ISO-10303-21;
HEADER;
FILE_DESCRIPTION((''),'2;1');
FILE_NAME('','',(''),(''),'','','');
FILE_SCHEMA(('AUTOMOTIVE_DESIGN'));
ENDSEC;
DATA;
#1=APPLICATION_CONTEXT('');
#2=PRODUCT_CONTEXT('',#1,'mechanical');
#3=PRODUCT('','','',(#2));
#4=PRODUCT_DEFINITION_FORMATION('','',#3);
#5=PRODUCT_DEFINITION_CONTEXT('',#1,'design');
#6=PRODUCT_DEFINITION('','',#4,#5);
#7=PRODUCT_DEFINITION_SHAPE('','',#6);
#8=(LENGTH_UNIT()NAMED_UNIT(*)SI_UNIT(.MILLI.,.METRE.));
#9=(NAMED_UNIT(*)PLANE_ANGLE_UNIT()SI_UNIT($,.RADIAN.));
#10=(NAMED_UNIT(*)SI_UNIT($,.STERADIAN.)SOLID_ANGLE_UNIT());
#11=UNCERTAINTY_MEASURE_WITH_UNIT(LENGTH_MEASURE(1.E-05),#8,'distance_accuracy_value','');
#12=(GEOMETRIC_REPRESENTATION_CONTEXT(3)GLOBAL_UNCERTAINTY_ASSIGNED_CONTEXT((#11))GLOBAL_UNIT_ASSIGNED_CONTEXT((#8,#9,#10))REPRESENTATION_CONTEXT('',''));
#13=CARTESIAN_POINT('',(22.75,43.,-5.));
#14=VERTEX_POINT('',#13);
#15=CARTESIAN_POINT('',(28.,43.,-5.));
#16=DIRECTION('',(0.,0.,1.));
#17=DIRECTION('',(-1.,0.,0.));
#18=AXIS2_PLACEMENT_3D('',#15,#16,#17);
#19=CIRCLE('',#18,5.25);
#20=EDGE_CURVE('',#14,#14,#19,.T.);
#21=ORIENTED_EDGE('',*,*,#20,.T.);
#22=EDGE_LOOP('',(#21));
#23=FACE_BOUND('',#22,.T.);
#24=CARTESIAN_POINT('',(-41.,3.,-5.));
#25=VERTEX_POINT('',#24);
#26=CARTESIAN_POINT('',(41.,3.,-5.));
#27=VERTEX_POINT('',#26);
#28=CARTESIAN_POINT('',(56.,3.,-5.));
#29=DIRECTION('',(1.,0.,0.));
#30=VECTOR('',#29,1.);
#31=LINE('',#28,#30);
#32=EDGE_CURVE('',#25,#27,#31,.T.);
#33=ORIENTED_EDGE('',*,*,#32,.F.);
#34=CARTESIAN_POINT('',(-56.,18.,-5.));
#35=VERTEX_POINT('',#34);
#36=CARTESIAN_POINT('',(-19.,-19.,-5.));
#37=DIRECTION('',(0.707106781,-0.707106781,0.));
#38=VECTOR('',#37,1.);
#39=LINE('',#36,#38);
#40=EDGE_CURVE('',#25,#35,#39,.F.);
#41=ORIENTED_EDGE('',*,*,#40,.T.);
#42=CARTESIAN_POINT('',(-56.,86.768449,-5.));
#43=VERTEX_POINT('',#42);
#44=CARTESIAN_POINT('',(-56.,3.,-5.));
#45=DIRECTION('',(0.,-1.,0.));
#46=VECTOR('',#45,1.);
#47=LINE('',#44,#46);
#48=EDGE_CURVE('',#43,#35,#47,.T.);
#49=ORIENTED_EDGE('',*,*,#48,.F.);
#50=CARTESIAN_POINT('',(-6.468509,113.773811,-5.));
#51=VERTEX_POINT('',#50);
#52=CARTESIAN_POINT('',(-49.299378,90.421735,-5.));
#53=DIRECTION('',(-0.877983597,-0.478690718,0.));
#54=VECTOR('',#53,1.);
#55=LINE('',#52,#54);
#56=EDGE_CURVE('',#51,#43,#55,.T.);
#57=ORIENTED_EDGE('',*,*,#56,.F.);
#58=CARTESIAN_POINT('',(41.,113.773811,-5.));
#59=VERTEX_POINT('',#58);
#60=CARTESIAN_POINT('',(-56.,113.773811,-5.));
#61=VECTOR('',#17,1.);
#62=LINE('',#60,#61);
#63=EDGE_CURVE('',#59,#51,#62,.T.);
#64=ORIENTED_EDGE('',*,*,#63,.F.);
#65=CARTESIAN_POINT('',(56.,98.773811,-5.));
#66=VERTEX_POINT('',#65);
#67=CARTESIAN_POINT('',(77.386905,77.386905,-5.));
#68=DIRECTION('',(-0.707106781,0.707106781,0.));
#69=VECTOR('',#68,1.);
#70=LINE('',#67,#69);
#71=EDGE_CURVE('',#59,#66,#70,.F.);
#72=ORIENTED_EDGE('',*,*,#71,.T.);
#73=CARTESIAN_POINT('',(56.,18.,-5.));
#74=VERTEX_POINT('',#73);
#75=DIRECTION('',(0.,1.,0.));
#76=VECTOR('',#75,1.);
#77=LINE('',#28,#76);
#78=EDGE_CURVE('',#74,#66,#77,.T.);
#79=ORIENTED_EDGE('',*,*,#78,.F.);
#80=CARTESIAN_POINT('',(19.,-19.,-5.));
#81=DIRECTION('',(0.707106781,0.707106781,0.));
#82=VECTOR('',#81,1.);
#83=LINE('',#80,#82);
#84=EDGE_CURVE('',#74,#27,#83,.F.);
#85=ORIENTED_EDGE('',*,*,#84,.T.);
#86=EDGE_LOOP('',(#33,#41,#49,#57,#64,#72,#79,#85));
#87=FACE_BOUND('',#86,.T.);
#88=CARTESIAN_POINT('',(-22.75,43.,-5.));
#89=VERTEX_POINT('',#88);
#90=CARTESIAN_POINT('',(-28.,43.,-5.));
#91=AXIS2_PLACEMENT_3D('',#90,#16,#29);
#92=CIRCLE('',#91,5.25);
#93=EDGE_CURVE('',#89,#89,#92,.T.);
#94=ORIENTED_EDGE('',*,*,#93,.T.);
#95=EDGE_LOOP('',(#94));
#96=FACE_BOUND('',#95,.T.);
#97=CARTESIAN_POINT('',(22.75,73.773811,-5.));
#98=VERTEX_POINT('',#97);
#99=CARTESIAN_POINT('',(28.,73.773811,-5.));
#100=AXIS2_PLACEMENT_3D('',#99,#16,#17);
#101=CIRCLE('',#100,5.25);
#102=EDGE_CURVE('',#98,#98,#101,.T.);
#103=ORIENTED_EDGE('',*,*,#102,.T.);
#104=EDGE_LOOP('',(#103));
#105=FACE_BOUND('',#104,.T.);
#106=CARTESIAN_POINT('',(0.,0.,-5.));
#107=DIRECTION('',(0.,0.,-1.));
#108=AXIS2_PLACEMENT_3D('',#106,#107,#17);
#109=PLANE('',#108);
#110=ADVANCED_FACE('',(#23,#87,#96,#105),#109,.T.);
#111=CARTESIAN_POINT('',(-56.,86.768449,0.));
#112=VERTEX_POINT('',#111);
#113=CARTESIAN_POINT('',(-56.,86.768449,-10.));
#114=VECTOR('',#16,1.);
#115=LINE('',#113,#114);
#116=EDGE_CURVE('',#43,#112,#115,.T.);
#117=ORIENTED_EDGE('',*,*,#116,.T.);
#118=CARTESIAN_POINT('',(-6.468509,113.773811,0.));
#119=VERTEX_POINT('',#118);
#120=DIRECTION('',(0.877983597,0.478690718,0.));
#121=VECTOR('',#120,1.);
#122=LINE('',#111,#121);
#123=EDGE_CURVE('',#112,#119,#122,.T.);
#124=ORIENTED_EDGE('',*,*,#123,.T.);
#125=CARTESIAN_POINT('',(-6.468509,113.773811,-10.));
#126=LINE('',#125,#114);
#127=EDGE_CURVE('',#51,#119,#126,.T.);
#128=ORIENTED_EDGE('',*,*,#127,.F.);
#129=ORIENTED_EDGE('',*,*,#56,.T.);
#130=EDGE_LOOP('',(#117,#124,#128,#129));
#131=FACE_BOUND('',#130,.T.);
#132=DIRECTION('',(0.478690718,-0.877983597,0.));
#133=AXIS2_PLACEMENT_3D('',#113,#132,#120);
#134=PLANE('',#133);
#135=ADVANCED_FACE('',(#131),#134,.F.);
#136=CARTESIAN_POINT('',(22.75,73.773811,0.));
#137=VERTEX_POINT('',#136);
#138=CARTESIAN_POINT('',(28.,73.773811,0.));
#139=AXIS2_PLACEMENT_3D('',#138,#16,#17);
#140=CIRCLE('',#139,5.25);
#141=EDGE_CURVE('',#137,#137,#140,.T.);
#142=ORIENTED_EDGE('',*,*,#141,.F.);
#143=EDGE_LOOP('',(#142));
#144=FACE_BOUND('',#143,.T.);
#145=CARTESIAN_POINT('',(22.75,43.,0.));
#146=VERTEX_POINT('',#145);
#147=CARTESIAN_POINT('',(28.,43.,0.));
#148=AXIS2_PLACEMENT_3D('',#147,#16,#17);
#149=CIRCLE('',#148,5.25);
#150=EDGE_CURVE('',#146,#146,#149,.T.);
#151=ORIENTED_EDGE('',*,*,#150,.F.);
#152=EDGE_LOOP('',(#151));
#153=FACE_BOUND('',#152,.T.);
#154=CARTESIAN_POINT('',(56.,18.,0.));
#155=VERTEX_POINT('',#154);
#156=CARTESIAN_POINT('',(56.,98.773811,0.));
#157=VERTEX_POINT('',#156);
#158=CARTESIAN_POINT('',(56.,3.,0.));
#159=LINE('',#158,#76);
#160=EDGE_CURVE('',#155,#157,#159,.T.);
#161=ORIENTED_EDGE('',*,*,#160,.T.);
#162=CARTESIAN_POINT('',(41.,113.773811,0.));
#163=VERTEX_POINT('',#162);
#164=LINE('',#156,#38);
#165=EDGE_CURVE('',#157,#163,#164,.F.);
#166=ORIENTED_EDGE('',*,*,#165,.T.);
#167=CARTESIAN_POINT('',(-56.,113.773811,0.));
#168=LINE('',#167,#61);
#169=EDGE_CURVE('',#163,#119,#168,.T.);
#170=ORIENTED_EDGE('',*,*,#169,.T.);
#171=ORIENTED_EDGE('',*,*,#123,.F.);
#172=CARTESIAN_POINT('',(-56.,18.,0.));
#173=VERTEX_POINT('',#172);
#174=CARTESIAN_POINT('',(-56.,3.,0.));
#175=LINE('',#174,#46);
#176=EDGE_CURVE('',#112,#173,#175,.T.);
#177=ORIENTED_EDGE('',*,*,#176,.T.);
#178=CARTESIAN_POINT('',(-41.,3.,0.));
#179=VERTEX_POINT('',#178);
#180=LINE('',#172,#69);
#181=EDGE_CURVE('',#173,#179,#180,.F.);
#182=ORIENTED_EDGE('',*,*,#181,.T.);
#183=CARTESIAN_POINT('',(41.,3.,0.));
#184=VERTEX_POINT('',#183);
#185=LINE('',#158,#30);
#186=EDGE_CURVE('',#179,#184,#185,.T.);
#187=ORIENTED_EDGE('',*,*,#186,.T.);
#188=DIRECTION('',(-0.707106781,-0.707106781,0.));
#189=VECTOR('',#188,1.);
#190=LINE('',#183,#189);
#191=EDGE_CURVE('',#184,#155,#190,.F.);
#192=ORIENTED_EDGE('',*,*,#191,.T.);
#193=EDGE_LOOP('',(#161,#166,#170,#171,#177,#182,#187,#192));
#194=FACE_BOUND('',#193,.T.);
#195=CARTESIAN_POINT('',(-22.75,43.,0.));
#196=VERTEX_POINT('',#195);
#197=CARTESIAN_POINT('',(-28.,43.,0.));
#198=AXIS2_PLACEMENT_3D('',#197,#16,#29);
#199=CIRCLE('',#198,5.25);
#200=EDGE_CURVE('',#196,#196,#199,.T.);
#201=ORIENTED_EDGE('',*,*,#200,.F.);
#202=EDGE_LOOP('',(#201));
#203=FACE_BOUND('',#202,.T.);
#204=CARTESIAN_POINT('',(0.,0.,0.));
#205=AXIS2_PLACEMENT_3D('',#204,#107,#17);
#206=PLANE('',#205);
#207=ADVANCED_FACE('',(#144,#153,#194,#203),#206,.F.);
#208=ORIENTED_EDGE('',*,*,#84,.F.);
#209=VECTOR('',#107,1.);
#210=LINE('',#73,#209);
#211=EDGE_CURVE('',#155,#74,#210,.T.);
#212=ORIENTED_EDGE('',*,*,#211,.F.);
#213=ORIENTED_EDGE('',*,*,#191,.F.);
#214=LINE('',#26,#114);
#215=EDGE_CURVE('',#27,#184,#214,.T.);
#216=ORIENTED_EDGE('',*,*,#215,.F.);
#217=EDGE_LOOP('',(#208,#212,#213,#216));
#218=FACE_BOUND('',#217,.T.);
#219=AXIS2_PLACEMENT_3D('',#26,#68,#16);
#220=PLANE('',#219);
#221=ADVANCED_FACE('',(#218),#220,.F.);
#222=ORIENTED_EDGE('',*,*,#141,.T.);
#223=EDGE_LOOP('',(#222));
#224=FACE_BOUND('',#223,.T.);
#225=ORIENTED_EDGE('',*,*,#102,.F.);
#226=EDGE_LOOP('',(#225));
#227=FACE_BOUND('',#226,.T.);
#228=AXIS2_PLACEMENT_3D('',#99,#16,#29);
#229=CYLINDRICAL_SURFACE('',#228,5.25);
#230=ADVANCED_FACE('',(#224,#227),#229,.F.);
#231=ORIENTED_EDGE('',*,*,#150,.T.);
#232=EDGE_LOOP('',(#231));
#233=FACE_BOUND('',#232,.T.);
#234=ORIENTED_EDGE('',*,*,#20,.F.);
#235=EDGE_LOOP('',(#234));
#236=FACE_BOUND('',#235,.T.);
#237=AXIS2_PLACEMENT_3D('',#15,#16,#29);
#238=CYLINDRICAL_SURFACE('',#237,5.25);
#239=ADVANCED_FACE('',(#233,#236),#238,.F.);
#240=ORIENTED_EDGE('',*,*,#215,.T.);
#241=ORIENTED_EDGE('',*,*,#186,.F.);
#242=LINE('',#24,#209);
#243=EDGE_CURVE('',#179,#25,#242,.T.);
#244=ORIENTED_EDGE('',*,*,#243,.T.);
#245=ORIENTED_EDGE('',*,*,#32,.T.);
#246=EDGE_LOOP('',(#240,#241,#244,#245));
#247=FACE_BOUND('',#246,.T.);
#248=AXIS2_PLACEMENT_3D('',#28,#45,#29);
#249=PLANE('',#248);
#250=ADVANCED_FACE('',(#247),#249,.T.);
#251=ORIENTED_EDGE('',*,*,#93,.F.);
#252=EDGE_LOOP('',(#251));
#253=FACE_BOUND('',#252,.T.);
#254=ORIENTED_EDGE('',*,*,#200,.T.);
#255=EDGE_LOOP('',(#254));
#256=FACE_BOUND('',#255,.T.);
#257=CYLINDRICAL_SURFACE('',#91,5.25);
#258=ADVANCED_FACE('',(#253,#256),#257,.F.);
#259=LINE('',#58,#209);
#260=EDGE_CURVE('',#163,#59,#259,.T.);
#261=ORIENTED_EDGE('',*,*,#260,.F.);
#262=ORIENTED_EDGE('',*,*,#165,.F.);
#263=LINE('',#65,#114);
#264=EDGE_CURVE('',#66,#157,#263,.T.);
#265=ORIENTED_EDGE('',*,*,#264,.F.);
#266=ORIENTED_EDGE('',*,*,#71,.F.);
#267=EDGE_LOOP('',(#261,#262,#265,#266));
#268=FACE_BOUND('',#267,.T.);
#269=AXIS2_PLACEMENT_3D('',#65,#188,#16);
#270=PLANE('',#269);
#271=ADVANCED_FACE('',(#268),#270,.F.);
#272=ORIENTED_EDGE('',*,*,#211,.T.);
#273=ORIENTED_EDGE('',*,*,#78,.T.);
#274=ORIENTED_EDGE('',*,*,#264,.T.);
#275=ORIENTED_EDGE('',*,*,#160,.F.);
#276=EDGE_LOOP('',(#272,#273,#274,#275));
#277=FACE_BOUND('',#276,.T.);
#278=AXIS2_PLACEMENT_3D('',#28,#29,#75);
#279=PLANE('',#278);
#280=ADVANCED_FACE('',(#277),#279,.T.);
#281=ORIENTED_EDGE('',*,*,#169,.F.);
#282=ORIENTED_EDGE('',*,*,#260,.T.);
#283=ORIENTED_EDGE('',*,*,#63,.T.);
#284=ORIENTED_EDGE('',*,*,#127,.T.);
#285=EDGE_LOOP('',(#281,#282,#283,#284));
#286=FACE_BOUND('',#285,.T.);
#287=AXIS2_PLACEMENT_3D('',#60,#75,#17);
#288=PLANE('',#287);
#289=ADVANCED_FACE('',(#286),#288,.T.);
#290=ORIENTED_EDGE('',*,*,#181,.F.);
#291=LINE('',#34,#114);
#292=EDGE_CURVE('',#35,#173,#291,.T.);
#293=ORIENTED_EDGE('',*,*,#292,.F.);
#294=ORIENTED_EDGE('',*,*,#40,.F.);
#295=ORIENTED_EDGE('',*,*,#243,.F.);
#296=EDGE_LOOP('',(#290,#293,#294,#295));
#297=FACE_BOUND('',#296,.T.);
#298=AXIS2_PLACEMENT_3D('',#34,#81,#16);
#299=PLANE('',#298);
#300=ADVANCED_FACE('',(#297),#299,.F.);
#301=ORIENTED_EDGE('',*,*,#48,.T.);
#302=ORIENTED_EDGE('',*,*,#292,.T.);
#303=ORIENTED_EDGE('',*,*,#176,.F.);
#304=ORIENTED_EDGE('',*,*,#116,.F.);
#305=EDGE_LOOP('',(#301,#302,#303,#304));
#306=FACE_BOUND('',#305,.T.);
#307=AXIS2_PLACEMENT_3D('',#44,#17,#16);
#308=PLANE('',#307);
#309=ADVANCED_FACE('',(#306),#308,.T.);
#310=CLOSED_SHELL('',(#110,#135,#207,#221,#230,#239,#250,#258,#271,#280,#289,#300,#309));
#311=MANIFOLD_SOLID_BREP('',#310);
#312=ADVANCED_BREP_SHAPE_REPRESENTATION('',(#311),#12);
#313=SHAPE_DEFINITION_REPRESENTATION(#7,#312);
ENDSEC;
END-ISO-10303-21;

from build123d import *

# Parameters (mm, degrees)
SKETCH_1_W             = 112
SKETCH_1_H             = 110.77381068
SKETCH_1_R             = 5.25
SM_BASE_FLANGE_1_DEPTH = 5
CHAMFER_1_SIZE         = 15
CUT_EXTRUDE_1_DEPTH    = 10


# Sheet-metal steps are written as plain solids
with BuildPart() as part:
    # Sketch 1 → Базовая кромка1 (new body)
    with BuildSketch(Plane.XY):
        with Locations((0, 58.38690534)):
            Rectangle(SKETCH_1_W, SKETCH_1_H)
        with Locations((-28, 43)):
            Circle(SKETCH_1_R, mode=Mode.SUBTRACT)
        with Locations(Location((28, 73.77381068, 0), (0, 0, 180))):
            Circle(SKETCH_1_R, mode=Mode.SUBTRACT)
        with Locations(Location((28, 43, 0), (0, 0, 180))):
            Circle(SKETCH_1_R, mode=Mode.SUBTRACT)
    extrude(amount=-SM_BASE_FLANGE_1_DEPTH)

    # Фаска1
    chamfer_1_edges = [part.edges().sort_by_distance(p)[0] for p in [
        (56, 3, -2.5),
        (-56, 3, -2.5),
        (-56, 113.77381068, -2.5),
        (56, 113.77381068, -2.5),
    ]]
    chamfer(chamfer_1_edges, length=CHAMFER_1_SIZE)

    # Sketch 2 → Вырез-Вытянуть1 (cut)
    with BuildSketch(Plane.XY):
        Polygon((-56, 113.77381068), (-56, 86.768448621), (-6.468509112, 113.77381068), align=None)
    extrude(amount=-CUT_EXTRUDE_1_DEPTH, mode=Mode.SUBTRACT)


solid = part.part
